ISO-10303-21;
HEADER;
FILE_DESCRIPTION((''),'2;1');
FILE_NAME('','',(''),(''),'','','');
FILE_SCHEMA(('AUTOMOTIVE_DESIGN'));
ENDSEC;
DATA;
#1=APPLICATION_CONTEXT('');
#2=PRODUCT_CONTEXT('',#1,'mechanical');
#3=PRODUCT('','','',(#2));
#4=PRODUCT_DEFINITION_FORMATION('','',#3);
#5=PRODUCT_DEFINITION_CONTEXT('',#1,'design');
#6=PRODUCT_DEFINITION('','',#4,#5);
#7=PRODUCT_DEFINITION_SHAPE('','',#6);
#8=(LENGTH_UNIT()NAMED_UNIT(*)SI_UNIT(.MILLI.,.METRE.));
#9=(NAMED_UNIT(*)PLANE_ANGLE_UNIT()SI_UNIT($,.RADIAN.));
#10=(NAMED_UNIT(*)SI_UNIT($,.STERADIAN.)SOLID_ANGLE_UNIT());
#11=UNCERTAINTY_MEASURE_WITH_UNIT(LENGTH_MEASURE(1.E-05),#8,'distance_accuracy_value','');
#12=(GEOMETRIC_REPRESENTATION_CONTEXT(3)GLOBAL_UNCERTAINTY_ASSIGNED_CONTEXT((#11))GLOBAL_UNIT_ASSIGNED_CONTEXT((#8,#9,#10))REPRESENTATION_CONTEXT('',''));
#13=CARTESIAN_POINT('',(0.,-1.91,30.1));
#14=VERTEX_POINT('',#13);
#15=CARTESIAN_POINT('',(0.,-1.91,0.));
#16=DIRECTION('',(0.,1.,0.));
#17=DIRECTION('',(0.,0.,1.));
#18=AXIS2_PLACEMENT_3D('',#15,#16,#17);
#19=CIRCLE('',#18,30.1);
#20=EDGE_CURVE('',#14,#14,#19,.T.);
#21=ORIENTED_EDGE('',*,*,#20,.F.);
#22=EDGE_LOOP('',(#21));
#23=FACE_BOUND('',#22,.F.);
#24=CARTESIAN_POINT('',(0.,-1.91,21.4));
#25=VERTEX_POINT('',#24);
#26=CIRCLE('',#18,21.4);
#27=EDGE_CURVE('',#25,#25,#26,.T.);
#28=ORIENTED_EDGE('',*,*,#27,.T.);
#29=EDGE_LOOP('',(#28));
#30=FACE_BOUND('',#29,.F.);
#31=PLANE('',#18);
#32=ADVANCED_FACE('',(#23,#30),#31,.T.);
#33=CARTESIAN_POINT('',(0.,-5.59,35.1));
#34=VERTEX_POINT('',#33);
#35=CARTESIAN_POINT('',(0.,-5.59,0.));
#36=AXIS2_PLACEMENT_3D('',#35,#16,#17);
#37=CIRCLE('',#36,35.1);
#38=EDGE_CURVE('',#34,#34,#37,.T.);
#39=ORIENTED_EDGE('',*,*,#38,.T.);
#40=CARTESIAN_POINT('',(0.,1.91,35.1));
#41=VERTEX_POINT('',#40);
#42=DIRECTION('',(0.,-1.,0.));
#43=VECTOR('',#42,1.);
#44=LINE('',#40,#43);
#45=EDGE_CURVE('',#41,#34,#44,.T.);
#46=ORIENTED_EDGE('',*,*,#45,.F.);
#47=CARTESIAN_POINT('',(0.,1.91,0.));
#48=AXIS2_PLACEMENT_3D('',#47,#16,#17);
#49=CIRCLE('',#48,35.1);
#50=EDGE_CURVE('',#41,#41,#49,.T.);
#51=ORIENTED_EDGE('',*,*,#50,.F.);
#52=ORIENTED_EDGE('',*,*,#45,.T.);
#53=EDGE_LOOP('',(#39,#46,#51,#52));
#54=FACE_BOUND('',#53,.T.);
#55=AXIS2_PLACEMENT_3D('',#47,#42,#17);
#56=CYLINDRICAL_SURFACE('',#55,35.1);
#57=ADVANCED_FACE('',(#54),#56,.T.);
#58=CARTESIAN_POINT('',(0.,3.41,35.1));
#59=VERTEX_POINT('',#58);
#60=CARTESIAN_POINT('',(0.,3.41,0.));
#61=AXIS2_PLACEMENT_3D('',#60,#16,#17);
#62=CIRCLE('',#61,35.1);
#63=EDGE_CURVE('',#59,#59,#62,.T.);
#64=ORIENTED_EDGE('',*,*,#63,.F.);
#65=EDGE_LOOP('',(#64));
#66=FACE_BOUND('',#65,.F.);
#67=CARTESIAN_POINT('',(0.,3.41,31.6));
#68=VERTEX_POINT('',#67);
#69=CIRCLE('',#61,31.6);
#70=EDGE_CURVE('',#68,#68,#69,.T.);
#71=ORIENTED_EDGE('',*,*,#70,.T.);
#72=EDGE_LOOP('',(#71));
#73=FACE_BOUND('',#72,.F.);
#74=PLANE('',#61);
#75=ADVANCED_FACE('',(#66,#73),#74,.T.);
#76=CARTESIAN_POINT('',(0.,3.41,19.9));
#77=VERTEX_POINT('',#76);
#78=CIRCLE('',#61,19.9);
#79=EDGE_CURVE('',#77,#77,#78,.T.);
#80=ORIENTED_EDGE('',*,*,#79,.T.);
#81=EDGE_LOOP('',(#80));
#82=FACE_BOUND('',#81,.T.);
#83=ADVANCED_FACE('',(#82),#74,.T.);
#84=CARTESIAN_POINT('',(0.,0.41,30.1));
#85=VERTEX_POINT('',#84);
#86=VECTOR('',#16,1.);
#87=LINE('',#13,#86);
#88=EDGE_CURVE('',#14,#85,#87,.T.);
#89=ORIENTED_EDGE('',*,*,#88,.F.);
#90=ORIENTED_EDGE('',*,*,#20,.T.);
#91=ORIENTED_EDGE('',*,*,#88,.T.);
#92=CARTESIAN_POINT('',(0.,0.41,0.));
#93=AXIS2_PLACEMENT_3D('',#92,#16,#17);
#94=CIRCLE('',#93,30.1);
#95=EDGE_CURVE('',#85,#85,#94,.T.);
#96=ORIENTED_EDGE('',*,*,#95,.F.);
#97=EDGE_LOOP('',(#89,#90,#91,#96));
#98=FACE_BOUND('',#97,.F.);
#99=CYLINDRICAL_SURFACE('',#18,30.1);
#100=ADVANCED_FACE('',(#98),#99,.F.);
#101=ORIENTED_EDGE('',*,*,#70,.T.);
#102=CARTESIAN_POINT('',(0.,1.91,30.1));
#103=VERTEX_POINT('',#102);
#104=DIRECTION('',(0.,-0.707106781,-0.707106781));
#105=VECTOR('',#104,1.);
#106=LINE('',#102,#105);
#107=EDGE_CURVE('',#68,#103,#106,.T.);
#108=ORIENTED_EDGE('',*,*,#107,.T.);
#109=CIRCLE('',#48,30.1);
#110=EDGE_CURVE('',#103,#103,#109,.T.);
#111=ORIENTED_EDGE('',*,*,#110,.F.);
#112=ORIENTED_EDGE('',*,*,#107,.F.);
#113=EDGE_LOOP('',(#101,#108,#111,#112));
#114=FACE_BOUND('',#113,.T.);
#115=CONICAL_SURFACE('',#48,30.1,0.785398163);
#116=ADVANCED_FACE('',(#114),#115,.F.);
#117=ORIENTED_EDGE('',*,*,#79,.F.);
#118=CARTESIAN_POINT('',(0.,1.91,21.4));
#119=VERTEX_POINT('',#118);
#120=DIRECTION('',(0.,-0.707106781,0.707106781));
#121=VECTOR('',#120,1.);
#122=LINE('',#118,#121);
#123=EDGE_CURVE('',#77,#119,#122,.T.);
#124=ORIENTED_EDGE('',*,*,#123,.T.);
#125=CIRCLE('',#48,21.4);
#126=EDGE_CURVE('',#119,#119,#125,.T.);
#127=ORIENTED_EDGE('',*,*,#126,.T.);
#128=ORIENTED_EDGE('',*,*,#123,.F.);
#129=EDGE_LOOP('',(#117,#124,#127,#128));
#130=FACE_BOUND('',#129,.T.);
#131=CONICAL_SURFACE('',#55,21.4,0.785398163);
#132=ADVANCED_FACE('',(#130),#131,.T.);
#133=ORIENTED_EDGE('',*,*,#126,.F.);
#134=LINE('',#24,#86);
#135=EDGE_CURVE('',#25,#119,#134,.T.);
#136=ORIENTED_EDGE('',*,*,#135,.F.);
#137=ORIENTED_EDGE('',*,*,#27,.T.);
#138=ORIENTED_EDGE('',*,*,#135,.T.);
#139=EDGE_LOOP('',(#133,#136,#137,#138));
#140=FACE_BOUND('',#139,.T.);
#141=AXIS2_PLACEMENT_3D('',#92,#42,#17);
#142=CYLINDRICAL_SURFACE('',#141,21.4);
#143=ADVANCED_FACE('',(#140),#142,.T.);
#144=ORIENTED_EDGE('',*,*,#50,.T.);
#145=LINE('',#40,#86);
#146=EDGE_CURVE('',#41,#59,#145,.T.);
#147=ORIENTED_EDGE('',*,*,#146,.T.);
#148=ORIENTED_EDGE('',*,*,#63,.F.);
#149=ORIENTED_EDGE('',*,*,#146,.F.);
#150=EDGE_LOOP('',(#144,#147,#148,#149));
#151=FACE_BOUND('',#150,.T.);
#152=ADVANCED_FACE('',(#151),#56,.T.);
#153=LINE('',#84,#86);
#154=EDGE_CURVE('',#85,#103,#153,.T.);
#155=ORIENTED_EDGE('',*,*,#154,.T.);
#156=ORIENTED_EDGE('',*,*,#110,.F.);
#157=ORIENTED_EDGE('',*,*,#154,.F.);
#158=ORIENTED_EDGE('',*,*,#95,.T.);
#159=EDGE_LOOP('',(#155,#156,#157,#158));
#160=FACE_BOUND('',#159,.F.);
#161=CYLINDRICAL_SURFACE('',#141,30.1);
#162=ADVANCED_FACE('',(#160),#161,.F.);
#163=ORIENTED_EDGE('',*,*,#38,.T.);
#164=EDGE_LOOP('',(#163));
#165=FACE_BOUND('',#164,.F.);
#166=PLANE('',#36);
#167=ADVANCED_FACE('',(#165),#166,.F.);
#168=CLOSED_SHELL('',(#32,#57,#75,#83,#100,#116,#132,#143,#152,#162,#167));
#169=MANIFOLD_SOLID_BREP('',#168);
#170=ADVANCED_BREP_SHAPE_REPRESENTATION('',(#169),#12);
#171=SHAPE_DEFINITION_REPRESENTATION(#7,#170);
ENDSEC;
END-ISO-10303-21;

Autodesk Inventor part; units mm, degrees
ref_plane "YZ Plane" through (0, 0, 0) normal (1, 0, 0) x (0, 1, 0)
ref_plane "XZ Plane" through (0, 0, 0) normal (0, 1, 0) x (-1, 0, 0)
ref_plane "XY Plane" through (0, 0, 0) normal (0, 0, 1) x (1, 0, 0)
sketch "Sketch1" plane through (0, 0, 0) normal (1, 0, 0) x (0, 1, 0)
  line L0 (1.91, 21.4) -> (-1.91, 21.4)
  line L1 (-1.91, 21.4) -> (-1.91, 30.1)
  line L2 (-1.91, 30.1) -> (1.91, 30.1)
  line L3 (1.91, 21.4) -> (1.91, 0)
  line L4 (1.91, 30.1) -> (1.91, 35.1)
  line L5 (1.91, 35.1) -> (-5.59, 35.1)
  line L6 (-5.59, 35.1) -> (-5.59, 0)
  line L7 (-5.59, 0) -> (1.91, 0)
  point P0 (0, 0)
  dimension "d4" = 5
  dimension "d5" = 7.5
revolve "Revolution1" add sketch "Sketch1" angle 360 about axis through (0, -5.59, 0) along (0, 1, 0)
chamfer "Chamfer1" distance 1.5 angle 45 2 edges at (0, 1.91, -30.1) (0, 1.91, -21.4)
move faces "Move1" translate (0, 1.5, 0) faces at (6.585, 1.91, -0.7996) (-3.3526, 0.91, 20.6294) (-2.5025, 1.41, 30.9992) (3.8791, 1.91, -32.3815)
ref_plane "Work Plane1" through (0, 6.29, 0) normal (0, 1, 0) x (1, 0, 0)
properties part number "Spinner_Base"
